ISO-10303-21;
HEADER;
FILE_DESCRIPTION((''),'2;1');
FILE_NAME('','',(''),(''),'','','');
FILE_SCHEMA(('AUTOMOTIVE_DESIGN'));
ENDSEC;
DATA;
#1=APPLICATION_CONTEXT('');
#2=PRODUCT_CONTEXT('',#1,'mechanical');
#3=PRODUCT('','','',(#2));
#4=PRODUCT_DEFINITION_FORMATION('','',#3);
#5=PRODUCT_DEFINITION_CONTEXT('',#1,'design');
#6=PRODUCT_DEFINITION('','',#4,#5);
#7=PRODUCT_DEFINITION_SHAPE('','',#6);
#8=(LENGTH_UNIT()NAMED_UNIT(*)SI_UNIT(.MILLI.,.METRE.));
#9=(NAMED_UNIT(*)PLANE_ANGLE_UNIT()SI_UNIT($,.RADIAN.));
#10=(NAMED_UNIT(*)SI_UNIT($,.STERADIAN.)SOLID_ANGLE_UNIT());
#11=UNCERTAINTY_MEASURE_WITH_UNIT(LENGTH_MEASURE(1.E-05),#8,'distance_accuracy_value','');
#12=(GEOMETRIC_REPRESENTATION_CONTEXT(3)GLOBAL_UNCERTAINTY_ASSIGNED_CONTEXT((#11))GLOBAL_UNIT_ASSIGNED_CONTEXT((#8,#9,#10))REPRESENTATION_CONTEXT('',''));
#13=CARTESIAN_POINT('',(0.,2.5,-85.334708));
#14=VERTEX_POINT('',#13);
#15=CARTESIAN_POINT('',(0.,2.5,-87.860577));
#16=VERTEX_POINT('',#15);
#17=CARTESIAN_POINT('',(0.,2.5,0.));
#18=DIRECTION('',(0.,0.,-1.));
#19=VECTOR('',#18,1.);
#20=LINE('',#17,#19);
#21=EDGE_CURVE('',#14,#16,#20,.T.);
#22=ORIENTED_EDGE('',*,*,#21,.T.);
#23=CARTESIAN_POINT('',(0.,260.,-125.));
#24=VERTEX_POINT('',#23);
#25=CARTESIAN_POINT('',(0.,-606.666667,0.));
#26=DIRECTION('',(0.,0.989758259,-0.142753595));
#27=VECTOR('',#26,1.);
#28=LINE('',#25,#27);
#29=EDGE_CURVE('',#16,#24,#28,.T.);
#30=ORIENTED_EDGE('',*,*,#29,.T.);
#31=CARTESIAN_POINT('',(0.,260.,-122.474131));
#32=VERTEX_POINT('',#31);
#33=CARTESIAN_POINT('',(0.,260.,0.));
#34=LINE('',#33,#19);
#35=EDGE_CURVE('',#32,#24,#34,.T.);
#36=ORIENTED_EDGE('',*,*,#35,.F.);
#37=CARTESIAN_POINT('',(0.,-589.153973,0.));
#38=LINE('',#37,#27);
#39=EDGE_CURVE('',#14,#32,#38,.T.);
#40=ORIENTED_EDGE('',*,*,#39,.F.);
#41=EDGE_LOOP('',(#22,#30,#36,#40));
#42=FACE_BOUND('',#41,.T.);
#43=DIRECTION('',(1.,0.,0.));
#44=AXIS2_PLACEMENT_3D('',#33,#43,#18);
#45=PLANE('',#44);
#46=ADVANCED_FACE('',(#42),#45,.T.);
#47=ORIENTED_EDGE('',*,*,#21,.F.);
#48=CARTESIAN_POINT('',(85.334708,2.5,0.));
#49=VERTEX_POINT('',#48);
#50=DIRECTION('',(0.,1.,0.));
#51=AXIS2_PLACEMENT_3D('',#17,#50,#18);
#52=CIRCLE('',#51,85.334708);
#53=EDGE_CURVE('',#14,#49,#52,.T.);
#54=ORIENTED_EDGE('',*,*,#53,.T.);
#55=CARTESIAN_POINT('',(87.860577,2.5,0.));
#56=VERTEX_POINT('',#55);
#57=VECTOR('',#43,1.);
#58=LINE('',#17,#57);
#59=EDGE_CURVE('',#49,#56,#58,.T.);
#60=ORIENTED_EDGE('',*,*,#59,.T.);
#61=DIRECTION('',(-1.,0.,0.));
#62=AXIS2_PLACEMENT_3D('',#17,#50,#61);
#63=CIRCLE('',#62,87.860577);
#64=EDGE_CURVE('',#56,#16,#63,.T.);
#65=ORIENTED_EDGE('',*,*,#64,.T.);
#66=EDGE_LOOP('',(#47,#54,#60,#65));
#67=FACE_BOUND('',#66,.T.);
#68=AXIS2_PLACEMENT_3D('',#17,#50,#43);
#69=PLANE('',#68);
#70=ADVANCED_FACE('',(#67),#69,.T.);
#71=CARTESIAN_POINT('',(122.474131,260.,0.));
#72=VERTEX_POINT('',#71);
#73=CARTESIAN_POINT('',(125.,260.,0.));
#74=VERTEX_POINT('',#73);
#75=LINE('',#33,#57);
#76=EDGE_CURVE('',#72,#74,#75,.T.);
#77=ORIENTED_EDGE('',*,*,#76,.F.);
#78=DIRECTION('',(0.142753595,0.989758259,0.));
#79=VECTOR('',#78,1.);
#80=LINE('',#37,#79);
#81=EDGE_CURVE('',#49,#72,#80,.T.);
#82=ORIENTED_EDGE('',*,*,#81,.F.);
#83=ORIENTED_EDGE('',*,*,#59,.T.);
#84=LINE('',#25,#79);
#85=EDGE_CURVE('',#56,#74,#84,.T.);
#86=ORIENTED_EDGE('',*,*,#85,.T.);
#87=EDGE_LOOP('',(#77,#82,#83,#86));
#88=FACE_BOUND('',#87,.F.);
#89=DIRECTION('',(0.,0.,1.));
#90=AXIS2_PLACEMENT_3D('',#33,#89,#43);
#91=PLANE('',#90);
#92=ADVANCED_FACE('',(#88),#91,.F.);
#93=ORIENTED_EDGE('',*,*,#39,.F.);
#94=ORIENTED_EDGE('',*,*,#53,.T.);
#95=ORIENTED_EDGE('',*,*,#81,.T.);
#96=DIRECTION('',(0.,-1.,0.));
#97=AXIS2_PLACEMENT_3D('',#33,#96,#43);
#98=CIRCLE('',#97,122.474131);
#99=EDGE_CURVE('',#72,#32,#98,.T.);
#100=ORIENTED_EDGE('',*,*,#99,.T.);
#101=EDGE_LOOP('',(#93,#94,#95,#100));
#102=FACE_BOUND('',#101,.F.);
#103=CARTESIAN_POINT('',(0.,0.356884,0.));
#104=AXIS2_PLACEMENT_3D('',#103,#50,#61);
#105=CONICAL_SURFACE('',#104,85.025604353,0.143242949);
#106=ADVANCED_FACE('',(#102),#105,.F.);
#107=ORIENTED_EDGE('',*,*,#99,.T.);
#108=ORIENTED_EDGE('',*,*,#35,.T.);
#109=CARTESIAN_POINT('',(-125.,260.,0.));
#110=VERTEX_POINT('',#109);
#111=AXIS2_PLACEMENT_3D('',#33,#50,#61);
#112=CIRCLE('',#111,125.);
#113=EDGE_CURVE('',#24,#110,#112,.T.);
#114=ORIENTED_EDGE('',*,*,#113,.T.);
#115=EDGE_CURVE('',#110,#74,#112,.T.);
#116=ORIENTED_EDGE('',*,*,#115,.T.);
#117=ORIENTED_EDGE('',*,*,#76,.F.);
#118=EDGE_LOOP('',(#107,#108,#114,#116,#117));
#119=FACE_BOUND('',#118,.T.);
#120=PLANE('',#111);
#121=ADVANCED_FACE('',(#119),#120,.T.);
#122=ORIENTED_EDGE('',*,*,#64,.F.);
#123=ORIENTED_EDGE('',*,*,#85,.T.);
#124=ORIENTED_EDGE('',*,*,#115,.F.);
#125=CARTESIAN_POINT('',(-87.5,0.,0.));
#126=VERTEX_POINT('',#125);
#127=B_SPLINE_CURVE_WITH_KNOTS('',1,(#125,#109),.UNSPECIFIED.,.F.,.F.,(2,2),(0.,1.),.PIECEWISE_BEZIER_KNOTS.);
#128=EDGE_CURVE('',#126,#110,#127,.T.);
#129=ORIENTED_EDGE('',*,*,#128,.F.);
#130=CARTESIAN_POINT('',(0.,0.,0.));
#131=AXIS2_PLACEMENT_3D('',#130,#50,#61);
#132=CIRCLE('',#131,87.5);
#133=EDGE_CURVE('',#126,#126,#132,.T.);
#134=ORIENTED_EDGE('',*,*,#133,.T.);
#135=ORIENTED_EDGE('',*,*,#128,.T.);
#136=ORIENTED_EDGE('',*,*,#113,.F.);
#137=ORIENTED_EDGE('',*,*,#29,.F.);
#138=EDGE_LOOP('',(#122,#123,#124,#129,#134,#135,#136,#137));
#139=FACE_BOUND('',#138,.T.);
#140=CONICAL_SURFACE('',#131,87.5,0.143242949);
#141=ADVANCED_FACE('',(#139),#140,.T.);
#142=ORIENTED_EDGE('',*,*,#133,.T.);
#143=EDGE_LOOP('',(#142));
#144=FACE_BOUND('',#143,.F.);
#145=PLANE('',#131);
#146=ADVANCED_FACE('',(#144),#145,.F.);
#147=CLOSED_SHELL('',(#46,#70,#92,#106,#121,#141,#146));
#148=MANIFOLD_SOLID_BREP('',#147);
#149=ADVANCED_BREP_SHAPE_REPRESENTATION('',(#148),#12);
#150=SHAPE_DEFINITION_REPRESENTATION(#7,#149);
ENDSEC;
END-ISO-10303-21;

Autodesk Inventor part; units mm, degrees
ref_plane "YZ Plane" through (0, 0, 0) normal (1, 0, 0) x (0, 1, 0)
ref_plane "XY Plane" through (0, 0, 0) normal (0, 0, 1) x (1, 0, 0)
sketch "Sketch1" plane through (0, 0, 0) normal (0, 1, 0) x (-1, 0, 0)
  circle A0 centre (0, 0) radius 87.5
  dimension "d0" = 175
ref_plane "Work Plane1" through (0, 260, 0) normal (0, 1, 0) x (-1, 0, 0)
sketch "Sketch2" plane through (0, 260, 0) normal (0, 1, 0) x (-1, 0, 0)
  circle A0 centre (0, 0) radius 125
  dimension "d2" = 250
loft "Loft1" add profiles "Sketch1", "Sketch2"
shell "Shell1" thickness 2.5 removed faces 1 at (0.6944, 260, 22.8612)
sketch "Sketch3" plane through (0, 260, 0) normal (0, 1, 0) x (1, 0, 0)
  line L0 (0, 0) -> (156, 0)
  line L1 (0, 0) -> (0, 209)
  line L2 (0, 209) -> (156, 209)
  line L3 (156, 209) -> (156, 0)
extrude "Extrusion1" cut sketch "Sketch3" against normal up to surface (257.5 mm away)
properties part number "Topf" material "Concrete"
